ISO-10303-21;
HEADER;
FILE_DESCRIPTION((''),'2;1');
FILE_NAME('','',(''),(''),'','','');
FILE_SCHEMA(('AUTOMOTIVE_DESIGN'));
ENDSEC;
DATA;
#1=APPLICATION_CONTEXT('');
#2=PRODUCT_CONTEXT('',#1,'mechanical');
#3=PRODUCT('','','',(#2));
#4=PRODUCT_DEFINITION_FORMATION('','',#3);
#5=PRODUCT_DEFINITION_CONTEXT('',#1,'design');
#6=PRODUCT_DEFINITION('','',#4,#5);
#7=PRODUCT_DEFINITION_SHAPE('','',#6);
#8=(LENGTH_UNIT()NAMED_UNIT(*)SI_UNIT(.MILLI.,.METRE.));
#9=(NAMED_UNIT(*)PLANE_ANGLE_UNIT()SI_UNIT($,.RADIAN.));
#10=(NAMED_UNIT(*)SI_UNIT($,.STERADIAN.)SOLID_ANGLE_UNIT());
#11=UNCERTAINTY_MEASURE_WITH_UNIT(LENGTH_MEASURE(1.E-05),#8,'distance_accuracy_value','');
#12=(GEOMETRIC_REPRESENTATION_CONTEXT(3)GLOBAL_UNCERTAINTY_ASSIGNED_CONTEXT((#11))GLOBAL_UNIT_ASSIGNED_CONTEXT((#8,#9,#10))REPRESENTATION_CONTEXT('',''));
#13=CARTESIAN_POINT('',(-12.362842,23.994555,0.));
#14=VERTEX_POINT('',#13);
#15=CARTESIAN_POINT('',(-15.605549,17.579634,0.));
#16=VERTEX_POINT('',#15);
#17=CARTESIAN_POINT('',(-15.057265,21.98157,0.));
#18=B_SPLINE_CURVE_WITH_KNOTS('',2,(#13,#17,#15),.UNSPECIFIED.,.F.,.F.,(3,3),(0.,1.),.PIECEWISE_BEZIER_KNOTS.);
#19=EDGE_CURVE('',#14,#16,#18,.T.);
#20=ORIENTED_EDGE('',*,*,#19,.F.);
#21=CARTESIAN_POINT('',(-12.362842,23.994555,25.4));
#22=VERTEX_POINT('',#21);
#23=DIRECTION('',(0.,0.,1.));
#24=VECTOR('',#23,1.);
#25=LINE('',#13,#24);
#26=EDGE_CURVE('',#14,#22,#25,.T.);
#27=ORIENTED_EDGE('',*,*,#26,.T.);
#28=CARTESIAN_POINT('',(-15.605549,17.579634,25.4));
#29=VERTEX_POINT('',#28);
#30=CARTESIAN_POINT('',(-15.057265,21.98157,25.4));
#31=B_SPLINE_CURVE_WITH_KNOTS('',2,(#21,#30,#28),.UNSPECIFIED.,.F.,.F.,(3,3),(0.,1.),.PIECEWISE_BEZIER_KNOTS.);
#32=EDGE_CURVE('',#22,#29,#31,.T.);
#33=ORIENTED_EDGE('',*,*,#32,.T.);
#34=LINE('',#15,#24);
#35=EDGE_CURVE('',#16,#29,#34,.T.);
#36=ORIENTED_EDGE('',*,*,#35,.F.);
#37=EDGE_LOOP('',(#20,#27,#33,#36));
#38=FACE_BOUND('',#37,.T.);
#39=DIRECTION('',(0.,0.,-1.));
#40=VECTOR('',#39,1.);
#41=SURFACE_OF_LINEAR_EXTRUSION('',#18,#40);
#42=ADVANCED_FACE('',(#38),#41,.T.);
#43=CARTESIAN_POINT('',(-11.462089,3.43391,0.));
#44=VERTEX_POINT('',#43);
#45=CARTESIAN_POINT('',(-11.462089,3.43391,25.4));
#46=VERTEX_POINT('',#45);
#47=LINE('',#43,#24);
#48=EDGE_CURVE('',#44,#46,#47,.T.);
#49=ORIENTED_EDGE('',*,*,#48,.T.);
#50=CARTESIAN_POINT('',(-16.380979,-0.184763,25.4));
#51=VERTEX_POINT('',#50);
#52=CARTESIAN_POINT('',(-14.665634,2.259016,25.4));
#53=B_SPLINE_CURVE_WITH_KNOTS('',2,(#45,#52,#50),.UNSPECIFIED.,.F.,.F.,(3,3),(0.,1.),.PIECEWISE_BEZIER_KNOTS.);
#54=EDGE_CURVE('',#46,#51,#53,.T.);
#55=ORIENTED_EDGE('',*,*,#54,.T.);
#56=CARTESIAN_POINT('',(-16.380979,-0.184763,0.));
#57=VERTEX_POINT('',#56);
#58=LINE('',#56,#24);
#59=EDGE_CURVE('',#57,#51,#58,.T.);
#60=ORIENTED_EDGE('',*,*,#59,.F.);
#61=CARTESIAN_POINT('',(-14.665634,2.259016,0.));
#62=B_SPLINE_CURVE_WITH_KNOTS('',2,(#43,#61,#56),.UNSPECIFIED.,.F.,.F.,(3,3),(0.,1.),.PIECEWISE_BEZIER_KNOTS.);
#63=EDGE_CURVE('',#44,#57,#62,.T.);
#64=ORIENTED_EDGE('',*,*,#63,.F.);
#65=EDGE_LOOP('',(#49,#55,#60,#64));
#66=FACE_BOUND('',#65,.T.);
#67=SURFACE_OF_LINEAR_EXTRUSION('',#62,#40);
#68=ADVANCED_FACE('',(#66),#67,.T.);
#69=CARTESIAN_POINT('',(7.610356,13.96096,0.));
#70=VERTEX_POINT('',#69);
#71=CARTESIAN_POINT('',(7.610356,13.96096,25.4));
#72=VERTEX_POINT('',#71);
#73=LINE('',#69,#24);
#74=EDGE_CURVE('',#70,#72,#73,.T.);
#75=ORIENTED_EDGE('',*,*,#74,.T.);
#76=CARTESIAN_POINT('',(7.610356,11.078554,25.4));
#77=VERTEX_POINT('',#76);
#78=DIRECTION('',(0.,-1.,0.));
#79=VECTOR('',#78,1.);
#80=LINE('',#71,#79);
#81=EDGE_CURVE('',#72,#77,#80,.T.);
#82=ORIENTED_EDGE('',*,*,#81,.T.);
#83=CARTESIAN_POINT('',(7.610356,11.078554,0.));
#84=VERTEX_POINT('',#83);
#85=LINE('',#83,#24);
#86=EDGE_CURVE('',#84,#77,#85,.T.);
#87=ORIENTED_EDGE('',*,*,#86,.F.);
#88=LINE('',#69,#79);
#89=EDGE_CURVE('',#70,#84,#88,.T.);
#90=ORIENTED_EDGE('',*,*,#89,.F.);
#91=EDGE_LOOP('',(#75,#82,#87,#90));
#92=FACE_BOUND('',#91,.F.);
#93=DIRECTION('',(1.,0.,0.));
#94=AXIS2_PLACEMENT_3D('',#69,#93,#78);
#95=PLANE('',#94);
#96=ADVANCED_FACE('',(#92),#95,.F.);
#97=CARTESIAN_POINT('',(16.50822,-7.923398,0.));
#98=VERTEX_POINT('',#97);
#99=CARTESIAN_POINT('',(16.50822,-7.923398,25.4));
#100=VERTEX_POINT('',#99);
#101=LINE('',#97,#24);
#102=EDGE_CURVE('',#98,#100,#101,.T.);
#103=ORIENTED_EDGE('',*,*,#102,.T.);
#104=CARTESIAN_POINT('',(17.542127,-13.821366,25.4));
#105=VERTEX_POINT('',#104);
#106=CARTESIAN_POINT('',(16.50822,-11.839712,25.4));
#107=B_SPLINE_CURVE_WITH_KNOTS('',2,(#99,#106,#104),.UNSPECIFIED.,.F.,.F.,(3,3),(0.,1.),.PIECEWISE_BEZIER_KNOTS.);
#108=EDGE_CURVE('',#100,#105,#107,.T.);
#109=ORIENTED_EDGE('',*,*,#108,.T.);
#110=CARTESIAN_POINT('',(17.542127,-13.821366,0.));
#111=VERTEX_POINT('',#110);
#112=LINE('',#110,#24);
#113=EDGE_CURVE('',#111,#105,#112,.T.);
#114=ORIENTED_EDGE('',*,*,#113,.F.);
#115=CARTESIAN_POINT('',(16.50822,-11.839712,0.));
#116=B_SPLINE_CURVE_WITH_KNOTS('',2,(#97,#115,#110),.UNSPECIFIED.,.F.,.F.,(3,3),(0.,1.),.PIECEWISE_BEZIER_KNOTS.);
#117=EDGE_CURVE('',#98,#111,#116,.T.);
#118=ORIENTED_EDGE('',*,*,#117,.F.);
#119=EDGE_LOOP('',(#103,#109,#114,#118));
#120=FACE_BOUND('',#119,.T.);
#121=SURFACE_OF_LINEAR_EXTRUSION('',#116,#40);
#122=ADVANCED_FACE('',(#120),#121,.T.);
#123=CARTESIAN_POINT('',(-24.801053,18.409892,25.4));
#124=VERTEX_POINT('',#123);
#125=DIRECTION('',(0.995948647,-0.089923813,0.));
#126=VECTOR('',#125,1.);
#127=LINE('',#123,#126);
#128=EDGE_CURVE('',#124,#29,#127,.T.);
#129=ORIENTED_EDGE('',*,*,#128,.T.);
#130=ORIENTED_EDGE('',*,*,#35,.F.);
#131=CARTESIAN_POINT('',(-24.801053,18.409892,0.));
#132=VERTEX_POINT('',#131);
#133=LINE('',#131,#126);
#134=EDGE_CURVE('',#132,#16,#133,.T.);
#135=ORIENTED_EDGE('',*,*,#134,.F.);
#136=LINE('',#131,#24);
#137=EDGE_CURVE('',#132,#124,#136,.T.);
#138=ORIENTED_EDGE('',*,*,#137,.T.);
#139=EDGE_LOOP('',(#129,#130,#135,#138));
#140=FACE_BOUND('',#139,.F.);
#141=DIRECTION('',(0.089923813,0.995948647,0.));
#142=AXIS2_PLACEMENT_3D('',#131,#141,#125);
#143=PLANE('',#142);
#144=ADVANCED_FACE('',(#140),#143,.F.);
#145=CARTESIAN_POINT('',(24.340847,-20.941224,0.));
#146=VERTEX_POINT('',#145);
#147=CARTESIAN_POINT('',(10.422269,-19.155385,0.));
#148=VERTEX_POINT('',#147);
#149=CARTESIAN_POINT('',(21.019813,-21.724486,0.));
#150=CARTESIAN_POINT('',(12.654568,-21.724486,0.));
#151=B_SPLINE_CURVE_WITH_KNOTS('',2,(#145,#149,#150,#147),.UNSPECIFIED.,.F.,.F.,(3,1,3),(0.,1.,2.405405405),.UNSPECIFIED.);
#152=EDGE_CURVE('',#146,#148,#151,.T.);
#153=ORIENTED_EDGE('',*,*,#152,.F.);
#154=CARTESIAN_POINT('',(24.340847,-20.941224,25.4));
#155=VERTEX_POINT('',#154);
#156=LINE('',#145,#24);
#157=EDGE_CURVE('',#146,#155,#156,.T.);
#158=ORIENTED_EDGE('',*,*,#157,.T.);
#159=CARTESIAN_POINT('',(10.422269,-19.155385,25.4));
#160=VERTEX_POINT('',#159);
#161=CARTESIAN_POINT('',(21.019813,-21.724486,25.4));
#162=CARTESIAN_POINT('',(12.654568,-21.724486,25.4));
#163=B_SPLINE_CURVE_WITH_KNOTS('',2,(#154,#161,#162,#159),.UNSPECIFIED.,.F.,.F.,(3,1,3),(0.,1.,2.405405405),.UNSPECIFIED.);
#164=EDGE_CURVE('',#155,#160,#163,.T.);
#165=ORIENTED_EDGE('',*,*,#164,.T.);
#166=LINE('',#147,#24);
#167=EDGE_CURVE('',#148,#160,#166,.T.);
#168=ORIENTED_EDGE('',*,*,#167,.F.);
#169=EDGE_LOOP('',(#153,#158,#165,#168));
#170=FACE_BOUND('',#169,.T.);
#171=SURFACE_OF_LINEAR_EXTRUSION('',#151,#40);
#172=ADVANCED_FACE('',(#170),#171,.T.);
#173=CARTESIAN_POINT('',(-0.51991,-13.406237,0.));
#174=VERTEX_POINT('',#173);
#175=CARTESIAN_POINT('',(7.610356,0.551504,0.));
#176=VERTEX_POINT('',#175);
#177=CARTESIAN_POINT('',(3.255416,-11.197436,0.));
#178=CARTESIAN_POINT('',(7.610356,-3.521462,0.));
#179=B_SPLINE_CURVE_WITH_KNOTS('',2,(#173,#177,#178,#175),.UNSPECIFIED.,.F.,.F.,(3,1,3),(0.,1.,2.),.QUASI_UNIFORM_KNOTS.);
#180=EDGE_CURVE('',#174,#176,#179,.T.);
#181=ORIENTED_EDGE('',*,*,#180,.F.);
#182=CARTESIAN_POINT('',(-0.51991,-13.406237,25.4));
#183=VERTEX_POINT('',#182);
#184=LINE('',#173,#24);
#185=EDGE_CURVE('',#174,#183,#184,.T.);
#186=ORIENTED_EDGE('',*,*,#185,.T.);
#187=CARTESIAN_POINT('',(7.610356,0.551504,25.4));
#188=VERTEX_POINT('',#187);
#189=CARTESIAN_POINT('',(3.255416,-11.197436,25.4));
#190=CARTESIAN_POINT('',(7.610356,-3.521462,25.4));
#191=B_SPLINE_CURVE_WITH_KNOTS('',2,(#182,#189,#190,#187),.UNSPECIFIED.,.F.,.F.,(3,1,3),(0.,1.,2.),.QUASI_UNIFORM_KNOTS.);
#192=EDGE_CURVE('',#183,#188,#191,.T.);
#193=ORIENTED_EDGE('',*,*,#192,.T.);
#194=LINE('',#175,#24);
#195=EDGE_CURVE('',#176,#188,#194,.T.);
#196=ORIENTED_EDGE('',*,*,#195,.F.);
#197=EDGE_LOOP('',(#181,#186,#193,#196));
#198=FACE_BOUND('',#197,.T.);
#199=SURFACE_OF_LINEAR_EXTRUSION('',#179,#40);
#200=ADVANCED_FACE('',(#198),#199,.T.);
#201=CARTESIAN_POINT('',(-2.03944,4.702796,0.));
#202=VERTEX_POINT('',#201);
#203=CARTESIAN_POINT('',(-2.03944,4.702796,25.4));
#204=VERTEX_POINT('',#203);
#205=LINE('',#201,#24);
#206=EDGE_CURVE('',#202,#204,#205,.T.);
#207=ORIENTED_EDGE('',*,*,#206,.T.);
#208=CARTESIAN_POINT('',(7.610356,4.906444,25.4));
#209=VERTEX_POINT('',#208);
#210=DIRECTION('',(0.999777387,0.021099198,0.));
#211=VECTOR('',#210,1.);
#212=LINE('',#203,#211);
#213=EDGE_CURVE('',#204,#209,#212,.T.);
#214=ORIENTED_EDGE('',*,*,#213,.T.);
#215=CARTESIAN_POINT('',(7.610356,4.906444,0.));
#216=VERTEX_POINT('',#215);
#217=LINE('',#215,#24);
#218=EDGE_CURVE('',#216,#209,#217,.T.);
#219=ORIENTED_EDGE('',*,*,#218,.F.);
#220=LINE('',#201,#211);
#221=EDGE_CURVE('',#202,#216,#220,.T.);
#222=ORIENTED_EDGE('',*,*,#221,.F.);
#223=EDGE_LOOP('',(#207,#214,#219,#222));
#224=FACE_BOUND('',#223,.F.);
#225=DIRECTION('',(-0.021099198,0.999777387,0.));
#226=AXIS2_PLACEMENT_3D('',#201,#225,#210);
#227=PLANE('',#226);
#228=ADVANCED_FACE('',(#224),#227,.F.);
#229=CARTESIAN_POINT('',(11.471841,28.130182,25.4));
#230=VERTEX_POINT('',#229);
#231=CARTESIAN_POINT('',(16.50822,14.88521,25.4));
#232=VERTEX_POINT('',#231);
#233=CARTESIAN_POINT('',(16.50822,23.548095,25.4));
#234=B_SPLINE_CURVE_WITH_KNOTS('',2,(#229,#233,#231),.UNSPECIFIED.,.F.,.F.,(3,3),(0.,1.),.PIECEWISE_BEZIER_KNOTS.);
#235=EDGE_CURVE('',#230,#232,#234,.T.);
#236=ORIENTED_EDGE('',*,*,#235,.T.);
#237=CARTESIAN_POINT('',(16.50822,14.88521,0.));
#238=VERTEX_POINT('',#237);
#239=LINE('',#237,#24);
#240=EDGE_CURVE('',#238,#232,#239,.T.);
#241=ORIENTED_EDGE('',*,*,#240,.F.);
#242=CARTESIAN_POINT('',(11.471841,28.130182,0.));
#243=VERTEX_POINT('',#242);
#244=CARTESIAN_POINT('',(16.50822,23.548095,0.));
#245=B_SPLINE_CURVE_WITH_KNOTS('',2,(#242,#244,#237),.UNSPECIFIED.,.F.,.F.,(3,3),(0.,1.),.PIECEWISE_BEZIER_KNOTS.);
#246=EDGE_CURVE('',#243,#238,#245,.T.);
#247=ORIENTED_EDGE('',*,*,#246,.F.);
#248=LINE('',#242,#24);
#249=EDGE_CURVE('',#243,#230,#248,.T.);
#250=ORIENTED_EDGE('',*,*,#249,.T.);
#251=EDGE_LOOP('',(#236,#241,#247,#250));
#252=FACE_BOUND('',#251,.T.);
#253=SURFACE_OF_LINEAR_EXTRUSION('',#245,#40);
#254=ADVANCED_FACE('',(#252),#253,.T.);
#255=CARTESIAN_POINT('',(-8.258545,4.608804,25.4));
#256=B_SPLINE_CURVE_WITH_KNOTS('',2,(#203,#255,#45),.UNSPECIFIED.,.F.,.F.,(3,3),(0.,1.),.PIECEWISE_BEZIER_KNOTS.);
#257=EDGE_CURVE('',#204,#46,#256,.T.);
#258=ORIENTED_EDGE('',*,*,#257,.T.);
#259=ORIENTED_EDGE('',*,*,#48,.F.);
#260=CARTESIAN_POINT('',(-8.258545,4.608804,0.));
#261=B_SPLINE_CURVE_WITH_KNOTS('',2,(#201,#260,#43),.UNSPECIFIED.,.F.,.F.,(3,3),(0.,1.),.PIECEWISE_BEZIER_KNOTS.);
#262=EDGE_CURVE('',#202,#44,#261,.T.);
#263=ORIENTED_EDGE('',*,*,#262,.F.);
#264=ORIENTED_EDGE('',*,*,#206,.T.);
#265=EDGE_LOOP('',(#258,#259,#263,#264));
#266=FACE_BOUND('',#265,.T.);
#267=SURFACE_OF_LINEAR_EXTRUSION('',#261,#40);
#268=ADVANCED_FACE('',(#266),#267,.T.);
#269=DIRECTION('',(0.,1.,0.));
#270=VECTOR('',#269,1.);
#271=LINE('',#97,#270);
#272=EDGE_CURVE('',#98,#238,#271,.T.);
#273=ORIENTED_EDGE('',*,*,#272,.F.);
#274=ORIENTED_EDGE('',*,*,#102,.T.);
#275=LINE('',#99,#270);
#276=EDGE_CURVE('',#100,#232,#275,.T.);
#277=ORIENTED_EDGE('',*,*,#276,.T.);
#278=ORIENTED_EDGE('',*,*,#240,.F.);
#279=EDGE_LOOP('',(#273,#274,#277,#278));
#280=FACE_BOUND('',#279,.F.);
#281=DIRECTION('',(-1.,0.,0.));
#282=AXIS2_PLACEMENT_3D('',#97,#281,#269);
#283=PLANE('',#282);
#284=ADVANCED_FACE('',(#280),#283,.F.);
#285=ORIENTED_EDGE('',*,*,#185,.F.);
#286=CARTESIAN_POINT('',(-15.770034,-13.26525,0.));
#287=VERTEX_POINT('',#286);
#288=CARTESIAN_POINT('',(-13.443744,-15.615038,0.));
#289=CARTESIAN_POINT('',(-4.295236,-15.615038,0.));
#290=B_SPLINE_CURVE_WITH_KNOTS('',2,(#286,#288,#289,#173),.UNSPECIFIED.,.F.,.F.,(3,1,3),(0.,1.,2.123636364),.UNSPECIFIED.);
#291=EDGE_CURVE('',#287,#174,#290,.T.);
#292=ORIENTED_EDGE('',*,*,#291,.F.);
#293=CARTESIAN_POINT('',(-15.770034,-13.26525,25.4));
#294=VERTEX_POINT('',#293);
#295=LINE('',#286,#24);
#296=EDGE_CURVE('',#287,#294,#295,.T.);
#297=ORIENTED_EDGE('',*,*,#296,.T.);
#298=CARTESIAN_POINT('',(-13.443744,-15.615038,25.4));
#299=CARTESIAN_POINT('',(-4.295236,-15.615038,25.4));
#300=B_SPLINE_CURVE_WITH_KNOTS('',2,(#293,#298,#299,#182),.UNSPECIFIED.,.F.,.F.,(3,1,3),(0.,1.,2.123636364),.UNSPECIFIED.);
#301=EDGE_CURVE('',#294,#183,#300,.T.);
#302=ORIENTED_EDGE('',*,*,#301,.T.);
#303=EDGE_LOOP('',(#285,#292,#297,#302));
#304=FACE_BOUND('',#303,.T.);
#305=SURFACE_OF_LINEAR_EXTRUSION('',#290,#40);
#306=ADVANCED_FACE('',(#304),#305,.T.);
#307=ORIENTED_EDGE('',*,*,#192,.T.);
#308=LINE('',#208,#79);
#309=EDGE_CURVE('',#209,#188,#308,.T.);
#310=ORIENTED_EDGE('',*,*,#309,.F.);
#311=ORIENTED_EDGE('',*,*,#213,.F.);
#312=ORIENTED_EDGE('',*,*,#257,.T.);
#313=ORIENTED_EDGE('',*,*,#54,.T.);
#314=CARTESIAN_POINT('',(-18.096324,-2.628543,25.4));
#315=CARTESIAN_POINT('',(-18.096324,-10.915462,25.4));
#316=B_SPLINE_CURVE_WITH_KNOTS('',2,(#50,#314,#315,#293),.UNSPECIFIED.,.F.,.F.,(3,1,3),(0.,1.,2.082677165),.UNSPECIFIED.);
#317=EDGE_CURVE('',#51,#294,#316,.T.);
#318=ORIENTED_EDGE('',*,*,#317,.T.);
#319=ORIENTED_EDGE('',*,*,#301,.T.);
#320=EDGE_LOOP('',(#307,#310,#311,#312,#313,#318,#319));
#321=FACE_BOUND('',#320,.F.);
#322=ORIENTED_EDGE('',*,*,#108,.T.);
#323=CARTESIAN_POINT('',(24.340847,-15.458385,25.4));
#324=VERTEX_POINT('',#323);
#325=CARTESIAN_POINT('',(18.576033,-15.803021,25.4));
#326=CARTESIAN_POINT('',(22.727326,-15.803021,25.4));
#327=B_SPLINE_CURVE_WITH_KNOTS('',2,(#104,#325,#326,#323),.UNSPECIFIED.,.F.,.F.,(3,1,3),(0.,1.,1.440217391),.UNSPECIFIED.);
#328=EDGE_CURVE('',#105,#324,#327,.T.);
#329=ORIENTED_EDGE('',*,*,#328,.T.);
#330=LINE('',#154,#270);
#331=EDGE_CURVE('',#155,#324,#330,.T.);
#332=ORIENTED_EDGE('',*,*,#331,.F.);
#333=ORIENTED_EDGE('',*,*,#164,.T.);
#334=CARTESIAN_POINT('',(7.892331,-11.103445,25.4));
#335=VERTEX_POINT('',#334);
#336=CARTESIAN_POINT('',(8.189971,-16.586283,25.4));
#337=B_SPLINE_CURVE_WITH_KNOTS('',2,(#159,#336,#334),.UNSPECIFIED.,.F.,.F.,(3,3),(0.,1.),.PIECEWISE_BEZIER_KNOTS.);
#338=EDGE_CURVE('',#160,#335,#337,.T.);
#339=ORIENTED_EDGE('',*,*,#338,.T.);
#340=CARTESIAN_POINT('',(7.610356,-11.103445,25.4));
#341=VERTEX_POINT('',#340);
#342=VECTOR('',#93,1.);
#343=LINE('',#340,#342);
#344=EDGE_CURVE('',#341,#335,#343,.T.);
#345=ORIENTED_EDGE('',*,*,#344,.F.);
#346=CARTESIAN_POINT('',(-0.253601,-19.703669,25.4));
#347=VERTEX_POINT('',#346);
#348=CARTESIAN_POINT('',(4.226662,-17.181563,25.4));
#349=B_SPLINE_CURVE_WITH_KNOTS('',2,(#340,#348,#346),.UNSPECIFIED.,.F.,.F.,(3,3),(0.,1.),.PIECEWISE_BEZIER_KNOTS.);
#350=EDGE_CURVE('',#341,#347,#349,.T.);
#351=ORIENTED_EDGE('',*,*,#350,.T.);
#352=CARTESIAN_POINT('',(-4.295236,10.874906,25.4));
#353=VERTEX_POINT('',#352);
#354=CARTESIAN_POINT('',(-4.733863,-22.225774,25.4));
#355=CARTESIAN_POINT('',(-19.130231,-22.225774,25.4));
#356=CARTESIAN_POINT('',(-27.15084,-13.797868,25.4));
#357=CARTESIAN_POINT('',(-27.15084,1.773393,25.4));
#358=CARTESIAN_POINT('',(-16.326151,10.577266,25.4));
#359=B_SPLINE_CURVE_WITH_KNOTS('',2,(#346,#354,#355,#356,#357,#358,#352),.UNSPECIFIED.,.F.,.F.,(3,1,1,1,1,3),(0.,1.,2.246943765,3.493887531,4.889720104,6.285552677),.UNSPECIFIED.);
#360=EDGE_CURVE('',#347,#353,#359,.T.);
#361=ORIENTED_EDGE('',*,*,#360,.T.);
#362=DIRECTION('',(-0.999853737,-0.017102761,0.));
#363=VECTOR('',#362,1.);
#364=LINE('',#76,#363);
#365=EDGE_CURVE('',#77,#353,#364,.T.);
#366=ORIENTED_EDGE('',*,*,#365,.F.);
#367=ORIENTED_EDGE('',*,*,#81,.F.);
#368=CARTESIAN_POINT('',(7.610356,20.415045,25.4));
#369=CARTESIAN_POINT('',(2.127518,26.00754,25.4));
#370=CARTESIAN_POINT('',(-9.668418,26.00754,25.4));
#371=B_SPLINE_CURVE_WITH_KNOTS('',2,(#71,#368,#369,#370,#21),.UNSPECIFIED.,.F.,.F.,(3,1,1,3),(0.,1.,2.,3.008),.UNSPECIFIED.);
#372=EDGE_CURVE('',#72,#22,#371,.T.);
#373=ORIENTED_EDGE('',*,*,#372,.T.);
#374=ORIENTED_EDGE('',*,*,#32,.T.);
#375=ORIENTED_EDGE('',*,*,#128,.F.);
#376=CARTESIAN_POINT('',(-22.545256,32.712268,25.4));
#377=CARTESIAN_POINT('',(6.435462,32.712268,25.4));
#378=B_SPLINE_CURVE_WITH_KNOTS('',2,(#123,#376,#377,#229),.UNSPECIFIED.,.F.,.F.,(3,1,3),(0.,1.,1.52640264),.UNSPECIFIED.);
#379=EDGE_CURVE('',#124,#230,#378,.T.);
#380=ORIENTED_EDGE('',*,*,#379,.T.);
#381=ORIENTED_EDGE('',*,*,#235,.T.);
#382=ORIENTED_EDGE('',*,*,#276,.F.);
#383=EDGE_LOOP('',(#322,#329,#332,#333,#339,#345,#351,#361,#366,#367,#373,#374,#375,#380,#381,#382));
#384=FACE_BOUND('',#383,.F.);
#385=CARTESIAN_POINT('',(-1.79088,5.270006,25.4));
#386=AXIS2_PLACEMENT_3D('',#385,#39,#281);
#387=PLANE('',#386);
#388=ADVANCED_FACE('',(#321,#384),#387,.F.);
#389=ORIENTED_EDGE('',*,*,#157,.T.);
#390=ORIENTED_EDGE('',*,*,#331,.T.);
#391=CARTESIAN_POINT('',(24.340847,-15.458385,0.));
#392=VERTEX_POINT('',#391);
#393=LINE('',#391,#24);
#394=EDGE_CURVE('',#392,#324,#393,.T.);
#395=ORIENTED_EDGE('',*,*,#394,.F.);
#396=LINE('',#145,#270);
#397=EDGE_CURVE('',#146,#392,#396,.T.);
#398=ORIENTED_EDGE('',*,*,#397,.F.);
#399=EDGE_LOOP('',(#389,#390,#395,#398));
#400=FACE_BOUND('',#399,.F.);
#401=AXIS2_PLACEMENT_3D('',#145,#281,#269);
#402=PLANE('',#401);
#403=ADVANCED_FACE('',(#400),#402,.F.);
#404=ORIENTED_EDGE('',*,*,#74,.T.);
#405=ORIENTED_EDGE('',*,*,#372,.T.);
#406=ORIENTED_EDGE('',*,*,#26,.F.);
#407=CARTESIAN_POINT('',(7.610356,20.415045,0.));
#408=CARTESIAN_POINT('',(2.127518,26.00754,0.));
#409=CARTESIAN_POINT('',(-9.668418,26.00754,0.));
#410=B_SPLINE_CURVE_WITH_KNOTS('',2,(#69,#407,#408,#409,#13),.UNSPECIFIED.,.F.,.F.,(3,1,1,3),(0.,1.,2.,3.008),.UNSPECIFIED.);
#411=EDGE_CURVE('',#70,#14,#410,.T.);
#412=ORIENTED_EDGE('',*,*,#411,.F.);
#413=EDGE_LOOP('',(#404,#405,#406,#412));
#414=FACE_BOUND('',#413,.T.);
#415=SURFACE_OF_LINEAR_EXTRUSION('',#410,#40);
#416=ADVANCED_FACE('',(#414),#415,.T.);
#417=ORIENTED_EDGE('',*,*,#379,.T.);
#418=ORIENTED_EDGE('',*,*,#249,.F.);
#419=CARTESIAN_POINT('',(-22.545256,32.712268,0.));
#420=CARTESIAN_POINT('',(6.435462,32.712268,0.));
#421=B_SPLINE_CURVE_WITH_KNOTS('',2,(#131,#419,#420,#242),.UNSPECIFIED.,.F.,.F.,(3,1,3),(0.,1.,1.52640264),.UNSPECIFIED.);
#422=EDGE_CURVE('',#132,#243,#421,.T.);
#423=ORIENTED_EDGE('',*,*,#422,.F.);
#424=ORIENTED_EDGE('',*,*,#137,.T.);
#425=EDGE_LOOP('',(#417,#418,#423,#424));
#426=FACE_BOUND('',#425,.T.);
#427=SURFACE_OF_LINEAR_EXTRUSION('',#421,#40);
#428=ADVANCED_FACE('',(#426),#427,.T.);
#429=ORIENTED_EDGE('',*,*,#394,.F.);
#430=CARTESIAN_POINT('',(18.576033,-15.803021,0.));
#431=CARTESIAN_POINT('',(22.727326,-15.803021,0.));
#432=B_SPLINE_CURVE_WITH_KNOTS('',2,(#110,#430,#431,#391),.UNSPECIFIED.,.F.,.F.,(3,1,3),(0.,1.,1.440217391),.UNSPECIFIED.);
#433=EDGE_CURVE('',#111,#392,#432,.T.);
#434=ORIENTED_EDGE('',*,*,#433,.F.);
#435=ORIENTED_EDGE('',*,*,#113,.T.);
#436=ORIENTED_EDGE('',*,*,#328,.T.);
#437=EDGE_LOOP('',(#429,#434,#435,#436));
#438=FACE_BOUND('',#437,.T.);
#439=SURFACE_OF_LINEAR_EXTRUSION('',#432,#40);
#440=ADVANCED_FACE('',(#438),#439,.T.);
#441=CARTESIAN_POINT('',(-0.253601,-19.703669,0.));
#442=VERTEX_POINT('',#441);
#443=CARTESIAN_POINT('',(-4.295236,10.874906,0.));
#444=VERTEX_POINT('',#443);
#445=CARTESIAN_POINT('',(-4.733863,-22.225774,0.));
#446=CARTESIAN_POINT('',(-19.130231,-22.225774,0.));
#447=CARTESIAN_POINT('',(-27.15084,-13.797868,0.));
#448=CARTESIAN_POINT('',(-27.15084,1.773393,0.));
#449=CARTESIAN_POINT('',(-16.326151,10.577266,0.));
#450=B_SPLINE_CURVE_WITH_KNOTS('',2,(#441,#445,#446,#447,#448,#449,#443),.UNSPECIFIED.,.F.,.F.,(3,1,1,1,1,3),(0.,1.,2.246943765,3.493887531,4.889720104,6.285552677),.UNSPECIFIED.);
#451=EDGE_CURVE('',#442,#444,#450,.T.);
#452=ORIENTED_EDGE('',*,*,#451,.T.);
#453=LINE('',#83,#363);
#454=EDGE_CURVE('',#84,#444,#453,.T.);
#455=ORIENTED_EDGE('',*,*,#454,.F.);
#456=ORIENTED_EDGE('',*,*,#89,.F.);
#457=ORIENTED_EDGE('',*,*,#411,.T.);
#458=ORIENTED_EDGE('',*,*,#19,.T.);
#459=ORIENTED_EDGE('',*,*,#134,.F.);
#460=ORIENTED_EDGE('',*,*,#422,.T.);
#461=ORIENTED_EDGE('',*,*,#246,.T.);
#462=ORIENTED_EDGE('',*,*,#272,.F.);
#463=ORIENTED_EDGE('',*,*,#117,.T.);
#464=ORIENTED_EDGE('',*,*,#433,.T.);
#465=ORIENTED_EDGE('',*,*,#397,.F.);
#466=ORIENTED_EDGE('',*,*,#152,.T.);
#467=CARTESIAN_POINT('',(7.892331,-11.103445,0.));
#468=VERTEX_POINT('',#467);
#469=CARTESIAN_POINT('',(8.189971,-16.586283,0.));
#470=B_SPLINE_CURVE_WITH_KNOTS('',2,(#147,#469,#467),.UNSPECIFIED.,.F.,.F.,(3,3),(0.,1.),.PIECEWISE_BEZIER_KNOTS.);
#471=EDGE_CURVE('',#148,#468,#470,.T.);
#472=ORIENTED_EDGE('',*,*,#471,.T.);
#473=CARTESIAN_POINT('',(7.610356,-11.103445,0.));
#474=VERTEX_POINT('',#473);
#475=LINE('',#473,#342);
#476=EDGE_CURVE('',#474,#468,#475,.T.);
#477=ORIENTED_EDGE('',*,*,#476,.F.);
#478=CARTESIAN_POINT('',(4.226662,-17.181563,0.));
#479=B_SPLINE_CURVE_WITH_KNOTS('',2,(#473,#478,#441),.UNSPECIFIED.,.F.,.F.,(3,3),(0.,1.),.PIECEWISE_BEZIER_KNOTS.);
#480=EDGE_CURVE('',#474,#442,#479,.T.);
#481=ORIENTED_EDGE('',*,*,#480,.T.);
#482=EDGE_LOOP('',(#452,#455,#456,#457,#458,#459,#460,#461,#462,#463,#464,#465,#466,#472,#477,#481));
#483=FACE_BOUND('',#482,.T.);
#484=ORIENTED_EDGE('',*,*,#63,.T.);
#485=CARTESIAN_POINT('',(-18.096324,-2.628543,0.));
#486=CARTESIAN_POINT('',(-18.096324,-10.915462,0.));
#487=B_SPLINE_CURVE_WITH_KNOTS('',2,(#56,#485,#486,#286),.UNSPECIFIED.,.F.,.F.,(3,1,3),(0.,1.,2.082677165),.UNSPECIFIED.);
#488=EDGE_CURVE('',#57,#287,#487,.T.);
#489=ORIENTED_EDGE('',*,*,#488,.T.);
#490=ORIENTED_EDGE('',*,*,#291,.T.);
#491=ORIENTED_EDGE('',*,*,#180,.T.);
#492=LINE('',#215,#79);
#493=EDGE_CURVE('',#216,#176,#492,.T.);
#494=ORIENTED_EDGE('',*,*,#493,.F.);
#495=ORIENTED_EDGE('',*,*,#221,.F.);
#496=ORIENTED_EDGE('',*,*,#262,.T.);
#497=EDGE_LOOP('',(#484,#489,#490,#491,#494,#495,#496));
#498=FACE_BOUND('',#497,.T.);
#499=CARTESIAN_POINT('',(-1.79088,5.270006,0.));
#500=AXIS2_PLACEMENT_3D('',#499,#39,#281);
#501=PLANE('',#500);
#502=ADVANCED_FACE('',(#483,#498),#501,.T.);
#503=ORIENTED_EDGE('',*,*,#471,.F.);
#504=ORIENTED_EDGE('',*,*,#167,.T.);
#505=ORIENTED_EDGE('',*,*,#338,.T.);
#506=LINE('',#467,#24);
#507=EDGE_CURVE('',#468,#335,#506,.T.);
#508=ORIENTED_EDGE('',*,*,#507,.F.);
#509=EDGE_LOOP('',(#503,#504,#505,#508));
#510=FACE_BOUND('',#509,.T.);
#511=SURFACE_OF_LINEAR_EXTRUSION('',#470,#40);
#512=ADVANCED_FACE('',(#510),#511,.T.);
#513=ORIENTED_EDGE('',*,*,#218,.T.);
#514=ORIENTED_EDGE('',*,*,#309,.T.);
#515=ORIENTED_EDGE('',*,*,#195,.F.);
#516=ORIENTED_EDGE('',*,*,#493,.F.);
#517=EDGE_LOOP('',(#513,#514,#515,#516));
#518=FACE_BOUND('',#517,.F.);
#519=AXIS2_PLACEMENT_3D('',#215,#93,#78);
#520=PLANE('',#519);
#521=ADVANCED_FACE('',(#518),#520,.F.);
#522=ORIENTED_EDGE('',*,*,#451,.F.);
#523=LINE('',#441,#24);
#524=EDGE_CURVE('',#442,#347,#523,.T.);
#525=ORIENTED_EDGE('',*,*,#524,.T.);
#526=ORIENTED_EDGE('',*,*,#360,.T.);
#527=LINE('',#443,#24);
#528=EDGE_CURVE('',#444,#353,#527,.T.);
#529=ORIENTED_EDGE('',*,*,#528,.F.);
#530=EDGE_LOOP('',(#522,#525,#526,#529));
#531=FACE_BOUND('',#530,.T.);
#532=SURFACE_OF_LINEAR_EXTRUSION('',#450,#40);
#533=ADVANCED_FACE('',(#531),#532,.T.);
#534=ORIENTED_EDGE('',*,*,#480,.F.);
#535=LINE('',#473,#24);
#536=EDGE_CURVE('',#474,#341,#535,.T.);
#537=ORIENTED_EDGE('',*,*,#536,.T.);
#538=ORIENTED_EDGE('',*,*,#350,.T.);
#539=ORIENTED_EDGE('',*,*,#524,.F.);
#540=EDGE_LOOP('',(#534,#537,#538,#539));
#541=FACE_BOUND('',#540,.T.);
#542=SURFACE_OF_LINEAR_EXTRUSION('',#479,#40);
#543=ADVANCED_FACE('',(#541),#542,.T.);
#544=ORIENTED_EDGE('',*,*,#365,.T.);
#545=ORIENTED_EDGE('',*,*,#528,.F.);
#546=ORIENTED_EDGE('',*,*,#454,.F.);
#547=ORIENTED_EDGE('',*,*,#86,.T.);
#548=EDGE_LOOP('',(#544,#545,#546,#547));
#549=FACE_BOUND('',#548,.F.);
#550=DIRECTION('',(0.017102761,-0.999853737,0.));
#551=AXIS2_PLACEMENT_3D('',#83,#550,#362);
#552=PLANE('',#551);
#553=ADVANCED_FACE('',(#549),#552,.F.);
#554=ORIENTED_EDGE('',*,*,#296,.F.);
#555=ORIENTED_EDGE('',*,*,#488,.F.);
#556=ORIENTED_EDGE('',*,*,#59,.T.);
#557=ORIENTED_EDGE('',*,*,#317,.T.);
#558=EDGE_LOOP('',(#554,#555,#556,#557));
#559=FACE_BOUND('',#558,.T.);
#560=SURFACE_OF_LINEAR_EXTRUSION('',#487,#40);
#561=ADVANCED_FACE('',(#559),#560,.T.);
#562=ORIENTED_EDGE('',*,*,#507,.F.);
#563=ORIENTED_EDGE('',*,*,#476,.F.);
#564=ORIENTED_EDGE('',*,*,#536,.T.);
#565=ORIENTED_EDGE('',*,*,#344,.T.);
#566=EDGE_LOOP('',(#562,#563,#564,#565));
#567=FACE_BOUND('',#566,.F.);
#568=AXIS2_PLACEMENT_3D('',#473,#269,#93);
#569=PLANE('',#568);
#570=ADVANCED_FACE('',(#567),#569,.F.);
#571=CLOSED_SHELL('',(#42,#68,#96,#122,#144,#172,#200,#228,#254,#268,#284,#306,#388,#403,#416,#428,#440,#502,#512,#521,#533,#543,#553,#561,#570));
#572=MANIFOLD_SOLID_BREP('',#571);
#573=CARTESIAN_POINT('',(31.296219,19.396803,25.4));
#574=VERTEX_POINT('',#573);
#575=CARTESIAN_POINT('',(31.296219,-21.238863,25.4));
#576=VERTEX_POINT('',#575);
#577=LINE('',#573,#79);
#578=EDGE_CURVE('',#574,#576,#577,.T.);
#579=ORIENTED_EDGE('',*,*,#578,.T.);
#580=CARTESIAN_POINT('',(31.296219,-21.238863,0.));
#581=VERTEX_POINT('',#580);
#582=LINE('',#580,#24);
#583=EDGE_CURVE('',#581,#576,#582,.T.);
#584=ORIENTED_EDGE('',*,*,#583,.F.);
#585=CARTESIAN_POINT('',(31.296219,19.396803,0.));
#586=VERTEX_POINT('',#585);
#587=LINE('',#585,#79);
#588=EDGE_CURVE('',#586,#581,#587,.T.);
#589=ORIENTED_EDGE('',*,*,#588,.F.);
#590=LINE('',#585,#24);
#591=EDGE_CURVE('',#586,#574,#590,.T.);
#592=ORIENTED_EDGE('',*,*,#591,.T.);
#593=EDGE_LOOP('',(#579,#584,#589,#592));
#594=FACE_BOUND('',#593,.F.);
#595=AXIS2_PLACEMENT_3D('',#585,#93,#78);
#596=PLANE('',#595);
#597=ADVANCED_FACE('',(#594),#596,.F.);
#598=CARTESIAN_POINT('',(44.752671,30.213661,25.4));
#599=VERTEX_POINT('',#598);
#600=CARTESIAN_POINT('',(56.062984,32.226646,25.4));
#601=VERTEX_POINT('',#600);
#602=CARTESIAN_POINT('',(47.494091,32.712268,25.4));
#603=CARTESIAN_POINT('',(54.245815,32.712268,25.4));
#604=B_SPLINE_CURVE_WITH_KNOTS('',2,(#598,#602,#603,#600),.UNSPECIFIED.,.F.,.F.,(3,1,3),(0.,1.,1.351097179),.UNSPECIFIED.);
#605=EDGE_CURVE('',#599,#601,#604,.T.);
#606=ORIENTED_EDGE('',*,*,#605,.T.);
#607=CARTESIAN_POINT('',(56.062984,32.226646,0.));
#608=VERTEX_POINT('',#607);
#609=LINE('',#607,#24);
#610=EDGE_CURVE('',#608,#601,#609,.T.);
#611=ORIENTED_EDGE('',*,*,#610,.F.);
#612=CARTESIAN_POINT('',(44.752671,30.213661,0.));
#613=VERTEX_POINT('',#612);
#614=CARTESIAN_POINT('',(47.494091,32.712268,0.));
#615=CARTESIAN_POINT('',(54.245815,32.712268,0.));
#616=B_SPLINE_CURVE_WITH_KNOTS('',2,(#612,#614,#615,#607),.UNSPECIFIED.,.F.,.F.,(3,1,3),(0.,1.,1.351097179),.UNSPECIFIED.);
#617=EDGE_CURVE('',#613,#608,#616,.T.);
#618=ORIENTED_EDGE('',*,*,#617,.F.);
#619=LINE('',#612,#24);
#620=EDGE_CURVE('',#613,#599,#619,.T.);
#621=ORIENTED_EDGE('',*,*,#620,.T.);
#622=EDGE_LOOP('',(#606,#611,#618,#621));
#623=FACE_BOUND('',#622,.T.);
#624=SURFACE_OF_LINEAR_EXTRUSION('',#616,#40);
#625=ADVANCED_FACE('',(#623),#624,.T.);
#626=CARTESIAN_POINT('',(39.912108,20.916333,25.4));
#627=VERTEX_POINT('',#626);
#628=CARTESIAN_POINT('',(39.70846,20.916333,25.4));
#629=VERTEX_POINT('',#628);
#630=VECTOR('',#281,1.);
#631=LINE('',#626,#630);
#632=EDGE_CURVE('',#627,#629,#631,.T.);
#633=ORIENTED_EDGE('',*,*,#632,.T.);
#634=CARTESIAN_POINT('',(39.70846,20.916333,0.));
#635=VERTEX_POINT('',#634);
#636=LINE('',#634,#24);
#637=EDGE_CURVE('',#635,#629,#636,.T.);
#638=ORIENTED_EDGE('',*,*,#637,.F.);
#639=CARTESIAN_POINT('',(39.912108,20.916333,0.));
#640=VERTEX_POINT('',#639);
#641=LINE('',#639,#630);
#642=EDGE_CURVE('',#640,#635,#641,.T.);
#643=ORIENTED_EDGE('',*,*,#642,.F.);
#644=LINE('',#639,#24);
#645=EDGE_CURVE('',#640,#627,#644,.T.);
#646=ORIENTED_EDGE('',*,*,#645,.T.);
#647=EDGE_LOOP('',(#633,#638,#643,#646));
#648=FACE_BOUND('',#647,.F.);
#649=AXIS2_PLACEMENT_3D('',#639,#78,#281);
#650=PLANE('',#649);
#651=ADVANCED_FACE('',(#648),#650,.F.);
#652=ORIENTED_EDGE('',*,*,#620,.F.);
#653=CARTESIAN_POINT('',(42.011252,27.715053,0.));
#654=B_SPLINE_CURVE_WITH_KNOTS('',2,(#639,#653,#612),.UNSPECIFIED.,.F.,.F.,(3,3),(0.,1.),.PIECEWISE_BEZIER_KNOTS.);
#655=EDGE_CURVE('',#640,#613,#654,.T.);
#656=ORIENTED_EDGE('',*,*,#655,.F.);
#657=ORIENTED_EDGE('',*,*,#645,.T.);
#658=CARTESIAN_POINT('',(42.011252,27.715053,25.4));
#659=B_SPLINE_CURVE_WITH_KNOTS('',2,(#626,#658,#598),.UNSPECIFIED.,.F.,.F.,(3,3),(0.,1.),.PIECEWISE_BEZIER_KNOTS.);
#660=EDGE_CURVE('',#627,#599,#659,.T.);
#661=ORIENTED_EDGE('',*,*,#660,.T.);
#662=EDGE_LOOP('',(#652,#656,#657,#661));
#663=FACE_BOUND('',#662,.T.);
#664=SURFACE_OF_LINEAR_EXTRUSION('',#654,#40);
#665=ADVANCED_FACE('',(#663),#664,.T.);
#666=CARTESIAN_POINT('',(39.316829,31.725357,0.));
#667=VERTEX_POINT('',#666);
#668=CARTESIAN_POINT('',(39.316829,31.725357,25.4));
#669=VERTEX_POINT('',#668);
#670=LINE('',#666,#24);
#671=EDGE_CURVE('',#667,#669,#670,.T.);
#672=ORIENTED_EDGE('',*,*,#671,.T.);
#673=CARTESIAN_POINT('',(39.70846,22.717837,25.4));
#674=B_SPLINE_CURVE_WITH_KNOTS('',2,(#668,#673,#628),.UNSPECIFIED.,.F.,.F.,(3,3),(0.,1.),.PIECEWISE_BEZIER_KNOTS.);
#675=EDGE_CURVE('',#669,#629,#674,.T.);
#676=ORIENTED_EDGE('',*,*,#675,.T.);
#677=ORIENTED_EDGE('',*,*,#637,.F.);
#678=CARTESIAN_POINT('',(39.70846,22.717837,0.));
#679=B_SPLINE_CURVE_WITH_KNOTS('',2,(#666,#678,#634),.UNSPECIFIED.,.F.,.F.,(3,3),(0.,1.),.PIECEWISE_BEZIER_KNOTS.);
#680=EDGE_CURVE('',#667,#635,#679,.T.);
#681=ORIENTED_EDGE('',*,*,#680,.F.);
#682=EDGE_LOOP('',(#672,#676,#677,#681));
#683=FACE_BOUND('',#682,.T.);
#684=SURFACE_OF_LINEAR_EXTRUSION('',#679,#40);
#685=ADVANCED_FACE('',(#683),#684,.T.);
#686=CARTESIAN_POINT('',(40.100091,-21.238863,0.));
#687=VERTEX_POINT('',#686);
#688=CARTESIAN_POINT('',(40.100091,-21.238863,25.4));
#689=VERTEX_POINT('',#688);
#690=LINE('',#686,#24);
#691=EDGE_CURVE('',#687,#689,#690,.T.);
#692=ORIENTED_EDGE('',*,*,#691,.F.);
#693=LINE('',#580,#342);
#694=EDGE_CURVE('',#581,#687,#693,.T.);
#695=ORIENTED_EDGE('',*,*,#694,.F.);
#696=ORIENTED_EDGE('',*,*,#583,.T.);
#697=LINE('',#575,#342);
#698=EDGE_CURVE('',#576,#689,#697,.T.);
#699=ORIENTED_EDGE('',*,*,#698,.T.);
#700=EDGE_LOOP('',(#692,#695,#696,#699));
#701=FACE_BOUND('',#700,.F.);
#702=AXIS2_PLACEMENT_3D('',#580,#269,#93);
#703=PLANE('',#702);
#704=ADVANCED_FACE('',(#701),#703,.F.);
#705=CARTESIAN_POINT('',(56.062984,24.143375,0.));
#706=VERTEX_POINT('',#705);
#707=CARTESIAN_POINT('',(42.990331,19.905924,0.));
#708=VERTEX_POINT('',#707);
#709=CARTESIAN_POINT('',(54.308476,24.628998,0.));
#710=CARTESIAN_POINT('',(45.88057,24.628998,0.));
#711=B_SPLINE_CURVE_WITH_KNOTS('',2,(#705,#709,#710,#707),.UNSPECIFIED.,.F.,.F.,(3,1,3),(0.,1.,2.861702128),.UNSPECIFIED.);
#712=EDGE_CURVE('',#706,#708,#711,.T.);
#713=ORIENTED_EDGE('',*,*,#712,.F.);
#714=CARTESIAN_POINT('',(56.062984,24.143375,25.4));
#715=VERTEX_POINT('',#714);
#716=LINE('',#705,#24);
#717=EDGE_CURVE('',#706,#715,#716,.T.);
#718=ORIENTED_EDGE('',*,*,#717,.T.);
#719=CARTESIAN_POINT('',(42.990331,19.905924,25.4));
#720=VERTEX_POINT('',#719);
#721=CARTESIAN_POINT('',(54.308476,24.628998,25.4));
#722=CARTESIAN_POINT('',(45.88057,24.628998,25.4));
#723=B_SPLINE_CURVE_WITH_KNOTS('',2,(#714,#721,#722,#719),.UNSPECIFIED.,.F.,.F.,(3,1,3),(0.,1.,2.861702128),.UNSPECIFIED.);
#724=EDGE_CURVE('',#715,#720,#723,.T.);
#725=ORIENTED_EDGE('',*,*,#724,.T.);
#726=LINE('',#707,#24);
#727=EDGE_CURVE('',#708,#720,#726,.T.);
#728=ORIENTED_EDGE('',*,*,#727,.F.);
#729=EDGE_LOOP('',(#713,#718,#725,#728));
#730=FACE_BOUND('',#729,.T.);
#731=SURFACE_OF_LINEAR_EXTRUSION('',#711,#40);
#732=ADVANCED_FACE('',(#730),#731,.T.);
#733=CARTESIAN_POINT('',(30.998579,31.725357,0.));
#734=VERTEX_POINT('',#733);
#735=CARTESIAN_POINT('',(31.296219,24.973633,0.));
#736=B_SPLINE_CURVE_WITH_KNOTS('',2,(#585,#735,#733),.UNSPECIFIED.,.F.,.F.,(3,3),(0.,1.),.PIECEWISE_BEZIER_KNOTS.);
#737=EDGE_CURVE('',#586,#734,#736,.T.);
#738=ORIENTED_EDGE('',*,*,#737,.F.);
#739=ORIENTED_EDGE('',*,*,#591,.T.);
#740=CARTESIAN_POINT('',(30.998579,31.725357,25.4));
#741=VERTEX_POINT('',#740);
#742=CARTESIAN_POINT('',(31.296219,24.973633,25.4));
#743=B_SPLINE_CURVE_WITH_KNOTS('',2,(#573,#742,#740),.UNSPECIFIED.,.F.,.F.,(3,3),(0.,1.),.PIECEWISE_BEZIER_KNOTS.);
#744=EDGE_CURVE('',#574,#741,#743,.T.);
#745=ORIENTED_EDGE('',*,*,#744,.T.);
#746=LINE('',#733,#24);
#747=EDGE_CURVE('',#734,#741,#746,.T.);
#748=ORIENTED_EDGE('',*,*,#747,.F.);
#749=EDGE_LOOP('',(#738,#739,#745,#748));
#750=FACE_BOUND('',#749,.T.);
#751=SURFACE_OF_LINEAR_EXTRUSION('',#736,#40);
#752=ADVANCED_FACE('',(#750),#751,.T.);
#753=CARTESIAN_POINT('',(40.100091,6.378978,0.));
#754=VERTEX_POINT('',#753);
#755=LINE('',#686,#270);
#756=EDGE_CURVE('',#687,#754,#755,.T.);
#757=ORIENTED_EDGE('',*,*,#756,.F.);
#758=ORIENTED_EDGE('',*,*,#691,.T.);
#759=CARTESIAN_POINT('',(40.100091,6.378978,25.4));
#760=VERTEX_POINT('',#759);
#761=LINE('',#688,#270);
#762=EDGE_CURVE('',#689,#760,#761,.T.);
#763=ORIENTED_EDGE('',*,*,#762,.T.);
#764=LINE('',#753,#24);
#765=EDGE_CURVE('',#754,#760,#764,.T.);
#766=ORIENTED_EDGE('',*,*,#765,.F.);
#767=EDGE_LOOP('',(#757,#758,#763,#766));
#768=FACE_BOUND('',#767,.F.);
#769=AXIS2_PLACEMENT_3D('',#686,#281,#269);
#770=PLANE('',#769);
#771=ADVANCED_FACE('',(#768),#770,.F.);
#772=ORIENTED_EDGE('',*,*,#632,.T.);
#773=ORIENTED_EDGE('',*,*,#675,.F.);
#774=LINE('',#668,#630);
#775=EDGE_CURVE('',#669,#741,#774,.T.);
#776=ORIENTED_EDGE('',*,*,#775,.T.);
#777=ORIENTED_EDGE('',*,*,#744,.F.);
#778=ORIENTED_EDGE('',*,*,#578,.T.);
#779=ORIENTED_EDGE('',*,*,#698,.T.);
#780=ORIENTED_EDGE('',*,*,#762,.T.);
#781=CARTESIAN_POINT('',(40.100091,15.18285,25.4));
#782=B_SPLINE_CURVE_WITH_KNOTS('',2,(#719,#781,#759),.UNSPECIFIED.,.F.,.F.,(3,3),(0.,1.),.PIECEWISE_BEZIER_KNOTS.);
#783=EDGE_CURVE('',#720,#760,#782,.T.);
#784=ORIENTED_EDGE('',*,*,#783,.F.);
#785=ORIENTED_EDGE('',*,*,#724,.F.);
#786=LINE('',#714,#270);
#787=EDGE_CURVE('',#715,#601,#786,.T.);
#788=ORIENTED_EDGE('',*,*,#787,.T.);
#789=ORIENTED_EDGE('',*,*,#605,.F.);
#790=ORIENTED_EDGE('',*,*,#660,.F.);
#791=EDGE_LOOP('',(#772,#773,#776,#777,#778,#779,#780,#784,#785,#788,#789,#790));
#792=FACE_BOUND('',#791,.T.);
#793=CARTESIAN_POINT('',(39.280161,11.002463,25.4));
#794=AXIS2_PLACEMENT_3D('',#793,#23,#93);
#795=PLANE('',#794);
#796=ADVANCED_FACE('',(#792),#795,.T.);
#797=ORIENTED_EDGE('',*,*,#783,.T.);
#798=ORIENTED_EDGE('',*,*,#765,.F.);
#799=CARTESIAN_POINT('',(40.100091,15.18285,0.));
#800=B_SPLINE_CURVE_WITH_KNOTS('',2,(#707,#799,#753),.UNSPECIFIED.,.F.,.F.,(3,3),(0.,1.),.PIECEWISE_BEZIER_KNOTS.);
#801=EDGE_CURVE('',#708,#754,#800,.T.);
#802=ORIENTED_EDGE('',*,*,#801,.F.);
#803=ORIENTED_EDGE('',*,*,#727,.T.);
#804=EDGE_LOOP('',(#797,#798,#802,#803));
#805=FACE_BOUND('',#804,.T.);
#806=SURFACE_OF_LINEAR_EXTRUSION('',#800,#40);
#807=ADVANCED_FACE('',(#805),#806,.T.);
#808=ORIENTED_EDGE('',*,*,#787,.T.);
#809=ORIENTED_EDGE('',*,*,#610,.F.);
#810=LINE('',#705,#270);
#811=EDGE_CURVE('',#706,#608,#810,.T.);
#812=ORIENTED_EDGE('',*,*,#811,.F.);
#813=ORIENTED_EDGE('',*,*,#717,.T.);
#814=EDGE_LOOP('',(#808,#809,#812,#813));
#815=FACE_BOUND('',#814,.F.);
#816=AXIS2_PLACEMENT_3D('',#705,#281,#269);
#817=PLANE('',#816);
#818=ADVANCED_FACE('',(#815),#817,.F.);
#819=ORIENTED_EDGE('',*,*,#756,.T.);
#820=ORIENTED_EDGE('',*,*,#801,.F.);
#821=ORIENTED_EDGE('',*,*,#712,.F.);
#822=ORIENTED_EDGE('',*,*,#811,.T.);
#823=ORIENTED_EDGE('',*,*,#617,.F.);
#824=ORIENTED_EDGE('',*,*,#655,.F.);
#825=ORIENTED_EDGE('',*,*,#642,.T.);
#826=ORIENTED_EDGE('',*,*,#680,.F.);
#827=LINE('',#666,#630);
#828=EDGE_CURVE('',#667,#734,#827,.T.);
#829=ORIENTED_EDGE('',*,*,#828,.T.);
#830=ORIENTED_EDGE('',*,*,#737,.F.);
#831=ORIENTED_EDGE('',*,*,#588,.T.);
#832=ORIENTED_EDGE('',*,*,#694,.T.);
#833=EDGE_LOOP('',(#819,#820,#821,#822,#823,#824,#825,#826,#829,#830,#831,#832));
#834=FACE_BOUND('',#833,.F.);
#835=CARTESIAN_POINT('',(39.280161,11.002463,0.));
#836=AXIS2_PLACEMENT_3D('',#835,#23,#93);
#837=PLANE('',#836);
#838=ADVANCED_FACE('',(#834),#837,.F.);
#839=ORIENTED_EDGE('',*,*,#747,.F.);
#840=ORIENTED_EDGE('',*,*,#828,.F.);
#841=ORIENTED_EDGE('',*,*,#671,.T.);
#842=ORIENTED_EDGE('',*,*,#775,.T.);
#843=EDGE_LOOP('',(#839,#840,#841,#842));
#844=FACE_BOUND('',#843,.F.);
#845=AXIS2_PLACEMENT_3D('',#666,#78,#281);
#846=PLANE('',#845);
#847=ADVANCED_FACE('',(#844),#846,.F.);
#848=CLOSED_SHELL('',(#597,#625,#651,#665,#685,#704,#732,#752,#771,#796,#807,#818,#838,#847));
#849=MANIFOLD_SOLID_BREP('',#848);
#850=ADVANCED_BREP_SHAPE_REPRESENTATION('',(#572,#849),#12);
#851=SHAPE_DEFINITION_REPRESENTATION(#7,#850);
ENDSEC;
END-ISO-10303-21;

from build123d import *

# Parameters (mm, degrees)
F1_DEPTH = 25.4


with BuildPart() as f1:
    # F0 (on Top) → F1 (new body)
    with BuildSketch(Plane.XY):
        with BuildLine():
            Line((31.2962190364, 19.3968032254), (31.2962190364, -21.2388634682))
            Line((31.2962190364, -21.2388634682), (40.1000913116, -21.2388634682))
            Line((40.1000913116, -21.2388634682), (40.1000913116, 6.3789778505))
            add(Edge.make_bspline(
                [(42.9903305194, 19.905923953), (40.1000913116, 15.1828501257), (40.1000913116, 6.3789778505)],
                knots=[0, 0, 0, 1, 1, 1], degree=2))
            add(Edge.make_bspline(
                [(51.3634083327, 24.6289977804), (45.8805697272, 24.6289977804), (42.9903305194, 19.905923953)],
                knots=[0, 0, 0, 1, 1, 1], degree=2))
            add(Edge.make_bspline(
                [(56.0629842803, 24.1433749325), (54.3084759265, 24.6289977804), (51.3634083327, 24.6289977804)],
                knots=[0, 0, 0, 1, 1, 1], degree=2))
            Line((56.0629842803, 24.1433749325), (56.0629842803, 32.2266455623))
            add(Edge.make_bspline(
                [(52.4913065601, 32.7122684103), (54.2458149139, 32.7122684103), (56.0629842803, 32.2266455623)],
                knots=[0, 0, 0, 1, 1, 1], degree=2))
            add(Edge.make_bspline(
                [(44.7526714997, 30.2136605314), (47.4940908025, 32.7122684103), (52.4913065601, 32.7122684103)],
                knots=[0, 0, 0, 1, 1, 1], degree=2))
            add(Edge.make_bspline(
                [(39.9121082737, 20.9163327818), (42.011252197, 27.7150526526), (44.7526714997, 30.2136605314)],
                knots=[0, 0, 0, 1, 1, 1], degree=2))
            Line((39.9121082737, 20.9163327818), (39.7084599826, 20.9163327818))
            add(Edge.make_bspline(
                [(39.3168286537, 31.7253574613), (39.7084599826, 22.717836895), (39.7084599826, 20.9163327818)],
                knots=[0, 0, 0, 1, 1, 1], degree=2))
            Line((39.3168286537, 31.7253574613), (30.9985792264, 31.7253574613))
            add(Edge.make_bspline(
                [(31.2962190364, 19.3968032254), (31.2962190364, 24.9736333499), (30.9985792264, 31.7253574613)],
                knots=[0, 0, 0, 1, 1, 1], degree=2))
        make_face()
        with BuildLine():
            add(Edge.make_bspline(
                [(-11.1409517704, -22.2257744172), (-19.1302308813, -22.2257744172), (-23.1405356899, -18.0118213175)],
                knots=[0, 0, 0, 1, 1, 1], degree=2))
            add(Edge.make_bspline(
                [(-0.2536008251, -19.7036686586), (-4.7338632285, -22.2257744172), (-11.1409517704, -22.2257744172)],
                knots=[0, 0, 0, 1, 1, 1], degree=2))
            add(Edge.make_bspline(
                [(7.6103562606, -11.1034446745), (4.2266615783, -17.1815629001), (-0.2536008251, -19.7036686586)],
                knots=[0, 0, 0, 1, 1, 1], degree=2))
            Line((7.6103562606, -11.1034446745), (7.8923308174, -11.1034446745))
            add(Edge.make_bspline(
                [(10.4222692025, -19.1553847981), (8.1899706274, -16.58628328), (7.8923308174, -11.1034446745)],
                knots=[0, 0, 0, 1, 1, 1], degree=2))
            add(Edge.make_bspline(
                [(17.5421267631, -21.7244863161), (12.6545677776, -21.7244863161), (10.4222692025, -19.1553847981)],
                knots=[0, 0, 0, 1, 1, 1], degree=2))
            add(Edge.make_bspline(
                [(24.340846634, -20.9412236582), (21.0198129644, -21.7244863161), (17.5421267631, -21.7244863161)],
                knots=[0, 0, 0, 1, 1, 1], degree=2))
            Line((24.340846634, -20.9412236582), (24.340846634, -15.4583850526))
            add(Edge.make_bspline(
                [(21.4584400528, -15.8030206221), (22.7273255587, -15.8030206221), (24.340846634, -15.4583850526)],
                knots=[0, 0, 0, 1, 1, 1], degree=2))
            add(Edge.make_bspline(
                [(17.5421267631, -13.8213660975), (18.5760334716, -15.8030206221), (21.4584400528, -15.8030206221)],
                knots=[0, 0, 0, 1, 1, 1], degree=2))
            add(Edge.make_bspline(
                [(16.5082200547, -7.9233982833), (16.5082200547, -11.839711573), (17.5421267631, -13.8213660975)],
                knots=[0, 0, 0, 1, 1, 1], degree=2))
            Line((16.5082200547, -7.9233982833), (16.5082200547, 14.8852103157))
            add(Edge.make_bspline(
                [(11.4718411642, 28.1301818613), (16.5082200547, 23.5480953124), (16.5082200547, 14.8852103157)],
                knots=[0, 0, 0, 1, 1, 1], degree=2))
            add(Edge.make_bspline(
                [(-3.5589692416, 32.7122684103), (6.4354622737, 32.7122684103), (11.4718411642, 28.1301818613)],
                knots=[0, 0, 0, 1, 1, 1], degree=2))
            add(Edge.make_bspline(
                [(-24.8010525247, 18.4098922764), (-22.5452560699, 32.7122684103), (-3.5589692416, 32.7122684103)],
                knots=[0, 0, 0, 1, 1, 1], degree=2))
            Line((-24.8010525247, 18.4098922764), (-15.6055489206, 17.579633859))
            add(Edge.make_bspline(
                [(-12.3628415167, 23.9945550275), (-15.05726506, 21.9815699966), (-15.6055489206, 17.579633859)],
                knots=[0, 0, 0, 1, 1, 1], degree=2))
            add(Edge.make_bspline(
                [(-3.7469522795, 26.0075400583), (-9.6684179734, 26.0075400583), (-12.3628415167, 23.9945550275)],
                knots=[0, 0, 0, 1, 1, 1], degree=2))
            add(Edge.make_bspline(
                [(4.8689369578, 23.2112923695), (2.127517655, 26.0075400583), (-3.7469522795, 26.0075400583)],
                knots=[0, 0, 0, 1, 1, 1], degree=2))
            add(Edge.make_bspline(
                [(7.6103562606, 13.9609603793), (7.6103562606, 20.4150446807), (4.8689369578, 23.2112923695)],
                knots=[0, 0, 0, 1, 1, 1], degree=2))
            Line((7.6103562606, 13.9609603793), (7.6103562606, 11.0785537981))
            Line((7.6103562606, 11.0785537981), (-4.29523614, 10.8749055071))
            add(Edge.make_bspline(
                [(-21.7384955322, 6.1753295595), (-16.3261505659, 10.5772656971), (-4.29523614, 10.8749055071)],
                knots=[0, 0, 0, 1, 1, 1], degree=2))
            add(Edge.make_bspline(
                [(-27.1508404985, -6.4508644864), (-27.1508404985, 1.7733934219), (-21.7384955322, 6.1753295595)],
                knots=[0, 0, 0, 1, 1, 1], degree=2))
            add(Edge.make_bspline(
                [(-23.1405356899, -18.0118213175), (-27.1508404985, -13.7978682178), (-27.1508404985, -6.4508644864)],
                knots=[0, 0, 0, 1, 1, 1], degree=2))
        make_face()
        with BuildLine():
            add(Edge.make_bspline(
                [(-9.135799366, -15.6150375842), (-4.29523614, -15.6150375842), (-0.5199101288, -13.4062368888)],
                knots=[0, 0, 0, 1, 1, 1], degree=2))
            add(Edge.make_bspline(
                [(-15.7700340787, -13.2652496104), (-13.4437439847, -15.6150375842), (-9.135799366, -15.6150375842)],
                knots=[0, 0, 0, 1, 1, 1], degree=2))
            add(Edge.make_bspline(
                [(-18.0963241728, -6.607517018), (-18.0963241728, -10.9154616366), (-15.7700340787, -13.2652496104)],
                knots=[0, 0, 0, 1, 1, 1], degree=2))
            add(Edge.make_bspline(
                [(-16.3809789519, -0.1847632229), (-18.0963241728, -2.6285427157), (-18.0963241728, -6.607517018)],
                knots=[0, 0, 0, 1, 1, 1], degree=2))
            add(Edge.make_bspline(
                [(-11.4620894601, 3.4339102567), (-14.6656337311, 2.2590162698), (-16.3809789519, -0.1847632229)],
                knots=[0, 0, 0, 1, 1, 1], degree=2))
            add(Edge.make_bspline(
                [(-2.0394396852, 4.7027957626), (-8.2585451892, 4.6088042436), (-11.4620894601, 3.4339102567)],
                knots=[0, 0, 0, 1, 1, 1], degree=2))
            Line((-2.0394396852, 4.7027957626), (7.6103562606, 4.9064440536))
            Line((7.6103562606, 4.9064440536), (7.6103562606, 0.5515036755))
            add(Edge.make_bspline(
                [(5.4328860715, -7.3594491696), (7.6103562606, -3.5214621457), (7.6103562606, 0.5515036755)],
                knots=[0, 0, 0, 1, 1, 1], degree=2))
            add(Edge.make_bspline(
                [(-0.5199101288, -13.4062368888), (3.2554158824, -11.1974361935), (5.4328860715, -7.3594491696)],
                knots=[0, 0, 0, 1, 1, 1], degree=2))
        make_face(mode=Mode.SUBTRACT)
    extrude(amount=F1_DEPTH)


solid = f1.part
